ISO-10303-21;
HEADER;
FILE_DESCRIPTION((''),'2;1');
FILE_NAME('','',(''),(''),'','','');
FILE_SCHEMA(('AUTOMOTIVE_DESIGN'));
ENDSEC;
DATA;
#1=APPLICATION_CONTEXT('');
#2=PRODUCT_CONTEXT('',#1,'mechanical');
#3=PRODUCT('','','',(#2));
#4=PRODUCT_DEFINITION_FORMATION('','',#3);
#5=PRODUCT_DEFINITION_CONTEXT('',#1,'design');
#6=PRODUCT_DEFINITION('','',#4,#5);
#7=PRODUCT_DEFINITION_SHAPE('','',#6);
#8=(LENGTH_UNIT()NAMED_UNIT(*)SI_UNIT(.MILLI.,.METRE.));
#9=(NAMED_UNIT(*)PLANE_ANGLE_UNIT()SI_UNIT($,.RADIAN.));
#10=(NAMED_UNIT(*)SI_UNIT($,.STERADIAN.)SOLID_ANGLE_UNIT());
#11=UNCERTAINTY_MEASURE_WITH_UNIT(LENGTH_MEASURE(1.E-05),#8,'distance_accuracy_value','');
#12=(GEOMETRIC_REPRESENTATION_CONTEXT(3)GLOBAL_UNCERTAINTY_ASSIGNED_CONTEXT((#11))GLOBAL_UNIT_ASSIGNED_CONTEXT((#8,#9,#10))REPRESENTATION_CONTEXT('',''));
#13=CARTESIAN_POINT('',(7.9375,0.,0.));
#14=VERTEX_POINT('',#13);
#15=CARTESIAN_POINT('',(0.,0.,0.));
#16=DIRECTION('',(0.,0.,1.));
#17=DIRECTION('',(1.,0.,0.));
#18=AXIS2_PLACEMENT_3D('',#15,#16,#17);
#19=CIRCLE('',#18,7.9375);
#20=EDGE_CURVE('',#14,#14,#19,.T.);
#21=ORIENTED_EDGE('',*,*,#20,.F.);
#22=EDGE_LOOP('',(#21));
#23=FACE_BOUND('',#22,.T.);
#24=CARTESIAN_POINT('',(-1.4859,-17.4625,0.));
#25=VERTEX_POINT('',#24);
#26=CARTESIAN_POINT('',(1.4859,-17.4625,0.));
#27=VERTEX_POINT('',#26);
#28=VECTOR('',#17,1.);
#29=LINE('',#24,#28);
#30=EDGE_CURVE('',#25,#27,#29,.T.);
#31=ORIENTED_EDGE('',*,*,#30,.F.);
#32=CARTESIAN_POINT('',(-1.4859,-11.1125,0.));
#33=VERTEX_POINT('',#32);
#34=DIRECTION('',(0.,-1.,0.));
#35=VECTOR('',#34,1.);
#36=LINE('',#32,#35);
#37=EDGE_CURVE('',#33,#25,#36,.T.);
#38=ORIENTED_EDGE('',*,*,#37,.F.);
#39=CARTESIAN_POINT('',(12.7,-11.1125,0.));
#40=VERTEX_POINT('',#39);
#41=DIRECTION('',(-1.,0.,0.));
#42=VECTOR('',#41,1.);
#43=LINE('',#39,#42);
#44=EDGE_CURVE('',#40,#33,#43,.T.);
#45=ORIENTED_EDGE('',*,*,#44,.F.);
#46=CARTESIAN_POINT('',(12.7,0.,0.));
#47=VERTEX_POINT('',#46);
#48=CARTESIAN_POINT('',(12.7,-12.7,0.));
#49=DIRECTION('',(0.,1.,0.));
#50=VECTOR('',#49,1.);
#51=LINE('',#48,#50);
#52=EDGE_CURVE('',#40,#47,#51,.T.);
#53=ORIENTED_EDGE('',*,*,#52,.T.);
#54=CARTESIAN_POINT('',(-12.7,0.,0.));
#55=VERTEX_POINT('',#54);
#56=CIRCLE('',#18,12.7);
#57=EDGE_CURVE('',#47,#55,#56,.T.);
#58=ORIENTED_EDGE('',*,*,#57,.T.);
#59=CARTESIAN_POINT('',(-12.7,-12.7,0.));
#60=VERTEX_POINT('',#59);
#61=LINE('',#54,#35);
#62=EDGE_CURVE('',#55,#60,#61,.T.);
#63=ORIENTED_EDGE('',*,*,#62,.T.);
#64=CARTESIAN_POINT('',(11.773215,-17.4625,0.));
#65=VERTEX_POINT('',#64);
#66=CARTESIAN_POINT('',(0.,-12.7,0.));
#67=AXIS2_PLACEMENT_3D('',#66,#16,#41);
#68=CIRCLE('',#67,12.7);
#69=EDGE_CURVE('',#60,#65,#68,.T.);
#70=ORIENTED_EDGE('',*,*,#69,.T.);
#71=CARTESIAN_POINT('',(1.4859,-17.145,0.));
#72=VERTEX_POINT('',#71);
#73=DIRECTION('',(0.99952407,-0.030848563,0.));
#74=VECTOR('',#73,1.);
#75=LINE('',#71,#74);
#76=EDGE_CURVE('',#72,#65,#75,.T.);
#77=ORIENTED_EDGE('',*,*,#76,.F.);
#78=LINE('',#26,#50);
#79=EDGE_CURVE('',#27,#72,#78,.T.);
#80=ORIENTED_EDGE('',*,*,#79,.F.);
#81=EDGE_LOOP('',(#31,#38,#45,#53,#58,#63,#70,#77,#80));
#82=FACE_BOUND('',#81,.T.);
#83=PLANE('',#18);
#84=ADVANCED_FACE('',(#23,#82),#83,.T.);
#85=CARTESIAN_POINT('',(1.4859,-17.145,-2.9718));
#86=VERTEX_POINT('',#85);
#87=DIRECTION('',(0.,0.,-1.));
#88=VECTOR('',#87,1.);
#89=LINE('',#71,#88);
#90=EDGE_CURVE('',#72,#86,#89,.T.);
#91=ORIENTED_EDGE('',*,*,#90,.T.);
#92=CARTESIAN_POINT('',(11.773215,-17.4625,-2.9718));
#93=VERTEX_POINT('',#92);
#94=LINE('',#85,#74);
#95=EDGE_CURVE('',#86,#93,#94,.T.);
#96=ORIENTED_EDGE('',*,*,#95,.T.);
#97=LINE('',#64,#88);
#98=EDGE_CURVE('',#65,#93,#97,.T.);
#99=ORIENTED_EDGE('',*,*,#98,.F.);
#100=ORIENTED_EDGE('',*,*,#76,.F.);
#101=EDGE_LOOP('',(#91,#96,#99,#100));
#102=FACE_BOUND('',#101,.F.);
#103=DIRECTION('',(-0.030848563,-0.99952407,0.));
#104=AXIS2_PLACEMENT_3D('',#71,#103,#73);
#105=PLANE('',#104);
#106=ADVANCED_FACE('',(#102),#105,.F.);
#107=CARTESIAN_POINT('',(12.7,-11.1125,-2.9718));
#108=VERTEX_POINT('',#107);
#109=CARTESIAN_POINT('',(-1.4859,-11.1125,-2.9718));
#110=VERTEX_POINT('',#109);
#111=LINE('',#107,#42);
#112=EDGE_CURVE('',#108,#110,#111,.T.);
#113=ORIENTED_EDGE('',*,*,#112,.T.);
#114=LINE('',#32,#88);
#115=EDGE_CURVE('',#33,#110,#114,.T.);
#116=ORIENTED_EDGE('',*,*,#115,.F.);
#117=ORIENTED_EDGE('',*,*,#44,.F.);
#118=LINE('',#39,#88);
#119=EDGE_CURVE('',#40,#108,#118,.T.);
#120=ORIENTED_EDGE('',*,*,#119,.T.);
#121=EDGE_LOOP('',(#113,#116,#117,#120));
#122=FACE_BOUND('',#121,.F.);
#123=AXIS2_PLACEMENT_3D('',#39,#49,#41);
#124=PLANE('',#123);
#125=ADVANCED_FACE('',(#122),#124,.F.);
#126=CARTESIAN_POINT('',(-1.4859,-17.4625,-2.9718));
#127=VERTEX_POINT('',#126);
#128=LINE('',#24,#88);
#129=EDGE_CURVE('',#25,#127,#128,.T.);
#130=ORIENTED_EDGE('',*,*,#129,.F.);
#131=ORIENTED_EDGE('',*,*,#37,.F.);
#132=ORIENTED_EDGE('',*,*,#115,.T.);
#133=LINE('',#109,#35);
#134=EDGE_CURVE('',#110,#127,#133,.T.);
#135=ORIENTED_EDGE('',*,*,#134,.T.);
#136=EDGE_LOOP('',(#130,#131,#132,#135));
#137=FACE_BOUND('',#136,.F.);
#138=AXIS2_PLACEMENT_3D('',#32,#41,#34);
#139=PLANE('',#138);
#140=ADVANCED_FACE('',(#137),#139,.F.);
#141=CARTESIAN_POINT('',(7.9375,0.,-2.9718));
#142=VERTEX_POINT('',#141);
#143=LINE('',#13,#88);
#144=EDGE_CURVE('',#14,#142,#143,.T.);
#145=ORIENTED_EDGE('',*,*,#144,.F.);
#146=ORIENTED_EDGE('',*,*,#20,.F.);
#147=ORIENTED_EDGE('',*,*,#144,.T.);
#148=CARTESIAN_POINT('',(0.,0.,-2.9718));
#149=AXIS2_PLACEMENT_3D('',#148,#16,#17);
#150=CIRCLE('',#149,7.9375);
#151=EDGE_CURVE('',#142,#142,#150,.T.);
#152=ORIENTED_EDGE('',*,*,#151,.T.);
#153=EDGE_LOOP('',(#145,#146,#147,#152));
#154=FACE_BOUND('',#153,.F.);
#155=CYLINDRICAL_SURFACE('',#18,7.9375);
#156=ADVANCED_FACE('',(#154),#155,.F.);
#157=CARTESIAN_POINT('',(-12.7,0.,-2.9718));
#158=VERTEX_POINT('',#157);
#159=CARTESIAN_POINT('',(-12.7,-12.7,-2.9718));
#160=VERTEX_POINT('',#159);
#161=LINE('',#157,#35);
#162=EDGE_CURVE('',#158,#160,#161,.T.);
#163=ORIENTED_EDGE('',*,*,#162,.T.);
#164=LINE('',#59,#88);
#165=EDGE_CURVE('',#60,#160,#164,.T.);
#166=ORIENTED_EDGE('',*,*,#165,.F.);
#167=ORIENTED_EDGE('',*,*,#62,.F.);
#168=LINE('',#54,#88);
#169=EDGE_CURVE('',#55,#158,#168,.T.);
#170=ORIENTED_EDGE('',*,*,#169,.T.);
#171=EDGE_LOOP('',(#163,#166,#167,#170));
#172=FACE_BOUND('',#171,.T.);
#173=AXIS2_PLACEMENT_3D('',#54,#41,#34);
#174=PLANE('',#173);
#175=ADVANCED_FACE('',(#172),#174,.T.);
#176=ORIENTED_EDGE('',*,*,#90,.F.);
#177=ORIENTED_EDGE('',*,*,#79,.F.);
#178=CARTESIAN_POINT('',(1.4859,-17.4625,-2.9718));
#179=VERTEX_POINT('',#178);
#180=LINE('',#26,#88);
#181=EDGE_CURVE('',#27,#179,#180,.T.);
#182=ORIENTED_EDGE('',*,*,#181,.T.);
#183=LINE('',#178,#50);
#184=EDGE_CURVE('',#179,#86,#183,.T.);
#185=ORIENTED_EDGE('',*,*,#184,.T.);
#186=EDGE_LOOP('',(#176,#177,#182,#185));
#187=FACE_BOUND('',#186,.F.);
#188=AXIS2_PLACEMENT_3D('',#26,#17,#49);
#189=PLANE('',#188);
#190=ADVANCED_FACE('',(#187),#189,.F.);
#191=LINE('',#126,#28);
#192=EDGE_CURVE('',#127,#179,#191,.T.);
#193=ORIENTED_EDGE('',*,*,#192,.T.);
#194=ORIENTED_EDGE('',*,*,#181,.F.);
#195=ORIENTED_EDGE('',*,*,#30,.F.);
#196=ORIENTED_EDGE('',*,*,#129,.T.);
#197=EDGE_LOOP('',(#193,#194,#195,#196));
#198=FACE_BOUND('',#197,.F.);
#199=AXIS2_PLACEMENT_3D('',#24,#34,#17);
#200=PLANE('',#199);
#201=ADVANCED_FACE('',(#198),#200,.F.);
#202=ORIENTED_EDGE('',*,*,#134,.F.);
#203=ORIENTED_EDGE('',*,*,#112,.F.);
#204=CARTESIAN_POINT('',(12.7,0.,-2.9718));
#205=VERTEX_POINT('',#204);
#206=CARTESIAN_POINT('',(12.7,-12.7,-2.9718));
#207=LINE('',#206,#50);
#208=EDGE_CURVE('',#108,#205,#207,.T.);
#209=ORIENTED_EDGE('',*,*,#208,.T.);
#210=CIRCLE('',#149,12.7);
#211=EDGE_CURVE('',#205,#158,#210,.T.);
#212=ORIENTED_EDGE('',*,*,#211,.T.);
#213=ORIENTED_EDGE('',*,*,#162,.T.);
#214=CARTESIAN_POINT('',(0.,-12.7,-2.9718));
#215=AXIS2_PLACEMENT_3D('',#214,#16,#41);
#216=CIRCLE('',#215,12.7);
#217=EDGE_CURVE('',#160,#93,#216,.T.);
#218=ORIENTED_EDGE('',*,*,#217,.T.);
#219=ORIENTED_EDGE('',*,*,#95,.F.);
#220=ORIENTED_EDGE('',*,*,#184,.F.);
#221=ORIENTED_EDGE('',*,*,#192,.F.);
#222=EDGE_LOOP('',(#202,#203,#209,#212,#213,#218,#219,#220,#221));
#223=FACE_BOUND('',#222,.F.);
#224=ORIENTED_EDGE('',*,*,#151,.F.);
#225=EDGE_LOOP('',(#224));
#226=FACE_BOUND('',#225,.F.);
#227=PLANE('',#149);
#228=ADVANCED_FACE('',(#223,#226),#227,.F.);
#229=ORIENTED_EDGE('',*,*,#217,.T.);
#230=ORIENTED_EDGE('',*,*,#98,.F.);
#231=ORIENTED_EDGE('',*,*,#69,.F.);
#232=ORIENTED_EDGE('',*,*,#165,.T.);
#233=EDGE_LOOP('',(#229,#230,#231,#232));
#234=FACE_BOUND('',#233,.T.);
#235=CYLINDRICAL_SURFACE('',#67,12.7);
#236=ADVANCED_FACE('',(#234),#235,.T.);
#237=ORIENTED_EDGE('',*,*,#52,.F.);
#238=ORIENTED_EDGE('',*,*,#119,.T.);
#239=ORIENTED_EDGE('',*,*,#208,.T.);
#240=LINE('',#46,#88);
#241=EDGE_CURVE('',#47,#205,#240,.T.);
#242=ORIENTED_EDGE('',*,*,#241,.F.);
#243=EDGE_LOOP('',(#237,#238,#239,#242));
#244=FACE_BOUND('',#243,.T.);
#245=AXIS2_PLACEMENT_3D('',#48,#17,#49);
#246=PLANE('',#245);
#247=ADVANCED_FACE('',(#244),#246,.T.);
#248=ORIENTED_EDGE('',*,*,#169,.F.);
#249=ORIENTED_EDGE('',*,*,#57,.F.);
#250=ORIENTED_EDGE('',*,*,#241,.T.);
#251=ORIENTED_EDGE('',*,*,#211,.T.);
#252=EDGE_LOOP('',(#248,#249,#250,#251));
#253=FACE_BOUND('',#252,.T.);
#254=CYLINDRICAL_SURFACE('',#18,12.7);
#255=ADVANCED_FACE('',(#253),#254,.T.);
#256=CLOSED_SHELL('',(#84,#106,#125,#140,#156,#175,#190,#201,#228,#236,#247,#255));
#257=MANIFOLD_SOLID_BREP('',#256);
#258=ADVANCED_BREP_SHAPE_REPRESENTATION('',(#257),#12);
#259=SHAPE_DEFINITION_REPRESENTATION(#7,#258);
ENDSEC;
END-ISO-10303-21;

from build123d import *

# Parameters (mm, degrees)
F0_R     = 7.9375
F1_DEPTH = 2.9718
F3_DEPTH = 2.9718


# Not quite as in the source:
# - a feature names something its author has since deleted; it is built from what else it names


with BuildPart() as f1:
    # F0 (on Top) → F1 (new body)
    with BuildSketch(Plane.XY):
        with BuildLine():
            ThreePointArc((-12.7, 0), (0, -12.7), (12.7, 0))
            ThreePointArc((12.7, 0), (0, 12.7), (-12.7, 0))
        make_face()
        Circle(F0_R, mode=Mode.SUBTRACT)
        with BuildLine():
            Line((12.7, -12.7), (12.7, 0))
            ThreePointArc((12.7, 0), (0, -12.7), (-12.7, 0))
            Line((-12.7, 0), (-12.7, -12.7))
            ThreePointArc((-12.7, -12.7), (0, -25.4), (12.7, -12.7))
        make_face()
    extrude(amount=-F1_DEPTH)

    # F2 (on face) → F3 (cut, through all)
    with BuildSketch(Plane.XY):
        with BuildLine():
            Line((12.7, -11.1125), (-1.4859, -11.1125))
            Line((-1.4859, -11.1125), (-1.4859, -17.4625))
            Line((-1.4859, -17.4625), (1.4859, -17.4625))
            Line((1.4859, -17.4625), (1.4859, -17.145))
            Line((1.4859, -17.145), (11.7732150983, -17.4625))
            ThreePointArc((11.7732150983, -17.4625), (12.4661508042, -15.1259192332), (12.7, -12.7))
            Line((12.7, -12.7), (12.7, -11.1125))
        make_face()
    extrude(amount=-F3_DEPTH, mode=Mode.SUBTRACT)


solid = f1.part
